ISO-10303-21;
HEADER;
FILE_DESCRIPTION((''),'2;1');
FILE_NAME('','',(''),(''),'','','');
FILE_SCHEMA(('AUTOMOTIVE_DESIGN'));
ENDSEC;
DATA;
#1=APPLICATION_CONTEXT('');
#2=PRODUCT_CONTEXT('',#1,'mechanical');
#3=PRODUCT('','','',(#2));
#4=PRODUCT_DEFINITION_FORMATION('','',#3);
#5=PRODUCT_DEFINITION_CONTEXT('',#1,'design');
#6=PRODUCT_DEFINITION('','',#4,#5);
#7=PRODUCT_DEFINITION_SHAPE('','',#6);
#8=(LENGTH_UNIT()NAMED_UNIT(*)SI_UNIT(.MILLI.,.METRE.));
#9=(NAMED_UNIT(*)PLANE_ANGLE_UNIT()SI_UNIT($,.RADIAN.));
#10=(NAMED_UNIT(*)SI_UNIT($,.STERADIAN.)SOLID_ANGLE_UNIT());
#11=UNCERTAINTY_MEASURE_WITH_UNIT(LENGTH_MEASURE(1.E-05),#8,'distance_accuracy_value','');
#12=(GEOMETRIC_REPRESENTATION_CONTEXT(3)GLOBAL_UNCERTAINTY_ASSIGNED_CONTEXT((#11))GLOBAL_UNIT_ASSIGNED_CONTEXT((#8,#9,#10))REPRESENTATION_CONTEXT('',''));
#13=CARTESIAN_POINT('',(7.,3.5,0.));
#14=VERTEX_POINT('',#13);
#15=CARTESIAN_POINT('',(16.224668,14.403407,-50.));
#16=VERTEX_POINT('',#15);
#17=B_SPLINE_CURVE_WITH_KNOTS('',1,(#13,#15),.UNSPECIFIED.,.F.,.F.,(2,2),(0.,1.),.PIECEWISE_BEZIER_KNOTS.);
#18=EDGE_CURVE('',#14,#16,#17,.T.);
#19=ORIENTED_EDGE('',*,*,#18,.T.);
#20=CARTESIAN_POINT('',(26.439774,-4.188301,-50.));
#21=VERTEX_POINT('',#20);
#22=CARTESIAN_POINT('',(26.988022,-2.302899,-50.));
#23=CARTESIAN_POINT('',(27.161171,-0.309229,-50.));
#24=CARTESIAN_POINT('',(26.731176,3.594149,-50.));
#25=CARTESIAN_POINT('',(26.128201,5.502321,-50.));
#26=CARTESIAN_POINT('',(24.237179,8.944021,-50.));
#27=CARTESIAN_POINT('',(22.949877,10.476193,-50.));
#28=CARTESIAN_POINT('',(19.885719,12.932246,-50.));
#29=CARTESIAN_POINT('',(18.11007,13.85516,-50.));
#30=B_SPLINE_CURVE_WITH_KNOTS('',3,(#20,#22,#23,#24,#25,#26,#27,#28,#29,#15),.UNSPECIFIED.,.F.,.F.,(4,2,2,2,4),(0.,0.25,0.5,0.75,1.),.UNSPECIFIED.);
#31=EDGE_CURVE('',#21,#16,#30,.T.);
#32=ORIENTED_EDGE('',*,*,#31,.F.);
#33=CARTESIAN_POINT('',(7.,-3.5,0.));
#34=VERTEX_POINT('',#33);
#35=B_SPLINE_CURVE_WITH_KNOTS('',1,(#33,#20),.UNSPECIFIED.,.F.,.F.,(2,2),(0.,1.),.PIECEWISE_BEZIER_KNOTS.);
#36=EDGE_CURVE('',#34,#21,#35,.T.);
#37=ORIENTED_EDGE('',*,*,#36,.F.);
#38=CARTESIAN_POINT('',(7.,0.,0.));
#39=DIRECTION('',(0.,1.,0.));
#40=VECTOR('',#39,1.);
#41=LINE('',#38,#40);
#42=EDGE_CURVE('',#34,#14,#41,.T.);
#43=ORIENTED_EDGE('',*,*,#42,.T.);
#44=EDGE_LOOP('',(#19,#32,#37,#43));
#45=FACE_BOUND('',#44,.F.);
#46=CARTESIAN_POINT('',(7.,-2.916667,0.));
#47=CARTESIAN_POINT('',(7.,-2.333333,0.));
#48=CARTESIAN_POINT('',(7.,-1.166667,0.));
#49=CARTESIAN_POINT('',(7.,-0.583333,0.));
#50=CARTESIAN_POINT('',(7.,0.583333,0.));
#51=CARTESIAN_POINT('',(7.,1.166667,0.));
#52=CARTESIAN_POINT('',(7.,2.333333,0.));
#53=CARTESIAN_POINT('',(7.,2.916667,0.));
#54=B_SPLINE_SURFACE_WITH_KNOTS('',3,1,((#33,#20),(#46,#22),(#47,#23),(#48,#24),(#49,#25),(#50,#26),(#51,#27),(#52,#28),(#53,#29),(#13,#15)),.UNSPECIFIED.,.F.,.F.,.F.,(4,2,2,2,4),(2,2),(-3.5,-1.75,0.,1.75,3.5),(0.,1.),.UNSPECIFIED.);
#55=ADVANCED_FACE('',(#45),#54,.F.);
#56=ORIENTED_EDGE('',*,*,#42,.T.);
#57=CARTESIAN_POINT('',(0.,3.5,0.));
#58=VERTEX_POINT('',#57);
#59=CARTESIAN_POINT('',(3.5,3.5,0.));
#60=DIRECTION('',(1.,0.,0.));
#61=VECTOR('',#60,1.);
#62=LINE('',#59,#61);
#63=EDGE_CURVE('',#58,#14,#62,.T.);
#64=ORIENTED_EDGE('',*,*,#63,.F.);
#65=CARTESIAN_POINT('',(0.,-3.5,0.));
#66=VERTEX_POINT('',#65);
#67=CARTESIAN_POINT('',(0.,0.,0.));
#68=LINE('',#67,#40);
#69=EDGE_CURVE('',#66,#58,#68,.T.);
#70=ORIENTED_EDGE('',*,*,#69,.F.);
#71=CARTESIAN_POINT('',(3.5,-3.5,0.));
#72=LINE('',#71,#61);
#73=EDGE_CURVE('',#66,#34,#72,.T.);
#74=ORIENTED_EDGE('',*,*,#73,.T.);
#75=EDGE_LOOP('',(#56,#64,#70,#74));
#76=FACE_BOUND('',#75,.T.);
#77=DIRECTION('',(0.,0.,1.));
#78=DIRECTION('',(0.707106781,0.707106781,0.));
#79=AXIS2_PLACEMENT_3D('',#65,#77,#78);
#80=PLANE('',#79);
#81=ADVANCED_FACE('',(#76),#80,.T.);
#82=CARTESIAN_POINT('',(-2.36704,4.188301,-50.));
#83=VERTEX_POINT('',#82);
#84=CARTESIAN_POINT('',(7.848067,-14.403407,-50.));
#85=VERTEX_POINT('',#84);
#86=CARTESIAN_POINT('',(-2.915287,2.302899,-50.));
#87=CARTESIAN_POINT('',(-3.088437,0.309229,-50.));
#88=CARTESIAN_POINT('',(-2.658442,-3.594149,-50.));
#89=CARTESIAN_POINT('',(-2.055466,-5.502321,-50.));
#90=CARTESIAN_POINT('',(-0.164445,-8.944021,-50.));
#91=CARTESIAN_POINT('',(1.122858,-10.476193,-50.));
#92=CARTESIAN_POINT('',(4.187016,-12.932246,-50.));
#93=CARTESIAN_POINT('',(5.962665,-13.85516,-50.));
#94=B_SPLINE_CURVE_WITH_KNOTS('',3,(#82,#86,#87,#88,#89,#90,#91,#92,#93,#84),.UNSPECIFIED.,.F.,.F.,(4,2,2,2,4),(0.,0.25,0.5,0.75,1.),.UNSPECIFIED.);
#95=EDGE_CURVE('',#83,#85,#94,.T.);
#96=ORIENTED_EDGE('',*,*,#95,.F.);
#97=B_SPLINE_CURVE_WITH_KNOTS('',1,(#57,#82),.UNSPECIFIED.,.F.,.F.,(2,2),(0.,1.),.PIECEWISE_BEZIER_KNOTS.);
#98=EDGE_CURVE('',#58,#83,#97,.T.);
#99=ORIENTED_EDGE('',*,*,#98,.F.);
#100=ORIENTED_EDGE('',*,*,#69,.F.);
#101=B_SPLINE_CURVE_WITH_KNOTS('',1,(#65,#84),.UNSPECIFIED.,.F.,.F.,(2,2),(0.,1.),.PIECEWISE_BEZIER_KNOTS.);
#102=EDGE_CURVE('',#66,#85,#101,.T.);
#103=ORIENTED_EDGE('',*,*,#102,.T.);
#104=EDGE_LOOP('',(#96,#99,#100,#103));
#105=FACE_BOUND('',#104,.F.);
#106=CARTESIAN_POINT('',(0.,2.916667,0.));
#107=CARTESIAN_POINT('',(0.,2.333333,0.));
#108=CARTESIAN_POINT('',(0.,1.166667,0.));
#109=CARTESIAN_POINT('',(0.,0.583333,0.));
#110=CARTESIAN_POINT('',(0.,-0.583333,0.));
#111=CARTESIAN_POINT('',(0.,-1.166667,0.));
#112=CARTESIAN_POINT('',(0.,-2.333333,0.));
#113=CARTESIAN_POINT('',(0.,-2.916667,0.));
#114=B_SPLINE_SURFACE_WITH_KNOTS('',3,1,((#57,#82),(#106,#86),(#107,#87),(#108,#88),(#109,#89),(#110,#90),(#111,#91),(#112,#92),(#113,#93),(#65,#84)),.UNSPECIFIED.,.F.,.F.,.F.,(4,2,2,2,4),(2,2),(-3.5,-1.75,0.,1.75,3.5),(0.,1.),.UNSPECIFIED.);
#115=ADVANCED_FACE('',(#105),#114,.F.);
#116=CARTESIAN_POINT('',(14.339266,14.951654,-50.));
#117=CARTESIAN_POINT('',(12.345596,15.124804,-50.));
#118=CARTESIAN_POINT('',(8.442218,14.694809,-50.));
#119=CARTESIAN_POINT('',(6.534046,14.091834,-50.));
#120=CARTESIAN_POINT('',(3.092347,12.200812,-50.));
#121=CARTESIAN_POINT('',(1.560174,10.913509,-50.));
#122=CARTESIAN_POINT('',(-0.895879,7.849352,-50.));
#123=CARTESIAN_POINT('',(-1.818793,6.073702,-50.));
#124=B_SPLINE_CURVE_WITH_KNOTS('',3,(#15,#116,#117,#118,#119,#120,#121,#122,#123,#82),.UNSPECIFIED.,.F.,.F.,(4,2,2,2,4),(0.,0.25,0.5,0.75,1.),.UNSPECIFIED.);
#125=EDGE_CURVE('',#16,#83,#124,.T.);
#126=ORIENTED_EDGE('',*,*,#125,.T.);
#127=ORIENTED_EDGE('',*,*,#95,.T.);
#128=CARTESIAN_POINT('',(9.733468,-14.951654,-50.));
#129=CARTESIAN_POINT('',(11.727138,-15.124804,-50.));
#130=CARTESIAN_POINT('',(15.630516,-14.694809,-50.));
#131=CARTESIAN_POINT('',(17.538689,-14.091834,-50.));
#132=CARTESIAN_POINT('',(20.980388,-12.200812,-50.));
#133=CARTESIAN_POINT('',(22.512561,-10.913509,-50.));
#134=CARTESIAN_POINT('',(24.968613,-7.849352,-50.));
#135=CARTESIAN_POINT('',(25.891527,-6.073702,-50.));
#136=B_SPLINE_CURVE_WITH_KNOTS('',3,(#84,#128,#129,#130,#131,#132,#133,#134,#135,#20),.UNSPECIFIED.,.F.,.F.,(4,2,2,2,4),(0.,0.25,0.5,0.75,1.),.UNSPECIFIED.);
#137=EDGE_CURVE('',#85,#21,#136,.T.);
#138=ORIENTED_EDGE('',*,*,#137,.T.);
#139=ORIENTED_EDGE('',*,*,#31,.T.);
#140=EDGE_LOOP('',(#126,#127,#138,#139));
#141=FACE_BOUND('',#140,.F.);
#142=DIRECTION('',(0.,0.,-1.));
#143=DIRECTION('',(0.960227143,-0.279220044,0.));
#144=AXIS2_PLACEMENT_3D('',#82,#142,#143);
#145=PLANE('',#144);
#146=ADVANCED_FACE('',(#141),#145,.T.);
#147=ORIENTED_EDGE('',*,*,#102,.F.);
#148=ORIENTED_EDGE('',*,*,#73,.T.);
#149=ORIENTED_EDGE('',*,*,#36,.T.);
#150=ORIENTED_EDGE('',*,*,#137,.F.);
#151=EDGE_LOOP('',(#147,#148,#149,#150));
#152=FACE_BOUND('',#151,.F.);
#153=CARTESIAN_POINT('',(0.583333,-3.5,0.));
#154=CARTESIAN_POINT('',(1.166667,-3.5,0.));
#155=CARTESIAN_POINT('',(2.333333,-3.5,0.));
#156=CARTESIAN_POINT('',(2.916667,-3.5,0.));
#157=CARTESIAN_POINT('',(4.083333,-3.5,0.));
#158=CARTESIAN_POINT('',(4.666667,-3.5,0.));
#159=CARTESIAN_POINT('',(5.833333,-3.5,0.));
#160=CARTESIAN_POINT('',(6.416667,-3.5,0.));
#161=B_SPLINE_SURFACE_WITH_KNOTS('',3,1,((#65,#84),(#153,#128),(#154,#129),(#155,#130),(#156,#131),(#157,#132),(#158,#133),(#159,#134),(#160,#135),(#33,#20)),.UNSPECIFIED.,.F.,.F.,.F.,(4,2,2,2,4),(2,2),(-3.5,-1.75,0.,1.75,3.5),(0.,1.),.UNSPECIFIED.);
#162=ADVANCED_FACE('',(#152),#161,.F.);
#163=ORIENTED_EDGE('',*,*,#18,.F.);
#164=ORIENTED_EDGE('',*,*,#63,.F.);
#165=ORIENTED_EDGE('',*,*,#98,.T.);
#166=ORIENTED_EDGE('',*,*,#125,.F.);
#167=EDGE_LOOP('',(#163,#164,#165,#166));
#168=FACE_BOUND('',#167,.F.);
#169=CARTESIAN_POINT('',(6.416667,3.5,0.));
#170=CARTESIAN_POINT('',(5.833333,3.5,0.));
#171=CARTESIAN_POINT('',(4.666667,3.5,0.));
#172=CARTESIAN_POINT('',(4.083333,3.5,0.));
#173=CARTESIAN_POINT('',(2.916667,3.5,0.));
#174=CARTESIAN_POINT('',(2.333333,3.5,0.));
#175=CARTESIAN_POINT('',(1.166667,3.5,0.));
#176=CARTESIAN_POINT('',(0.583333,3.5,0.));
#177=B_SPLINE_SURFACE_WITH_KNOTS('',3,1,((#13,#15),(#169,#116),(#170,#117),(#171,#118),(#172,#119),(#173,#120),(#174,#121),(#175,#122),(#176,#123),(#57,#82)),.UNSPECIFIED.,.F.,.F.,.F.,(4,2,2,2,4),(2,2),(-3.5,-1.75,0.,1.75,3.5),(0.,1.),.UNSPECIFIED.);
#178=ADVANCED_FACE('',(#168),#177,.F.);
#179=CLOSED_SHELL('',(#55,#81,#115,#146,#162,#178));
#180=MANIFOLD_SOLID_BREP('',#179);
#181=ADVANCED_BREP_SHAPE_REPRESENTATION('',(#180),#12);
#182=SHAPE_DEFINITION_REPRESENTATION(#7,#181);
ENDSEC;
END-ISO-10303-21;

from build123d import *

# Parameters (mm, degrees)
F0_W = 7
F0_H = 7


# Not quite as in the source:
# - the arcs of a loft's sections are written as splines that run evenly, so that the points pair up as in the source's solid


with BuildPart() as f3:
    # F0 (on Top) → F3 section 0
    with BuildSketch(Plane.XY):
        with Locations((3.5, 0)):
            Rectangle(F0_W, F0_H)
    # F2 (on offset) → F3 section 1
    with BuildSketch(Plane.XY.offset(-50)):
        with BuildLine():
            add(Edge.make_bspline(
                [(-2.3670398878, 4.1883006664), (-2.915287163, 2.3028990793), (-3.0884365913, 0.3092290616), (-2.6584415625, -3.5941491101), (-2.05546629, -5.5023214516), (-0.1644445272, -8.9440206786), (1.1228579268, -10.4761934025), (4.1870155024, -12.9322461765), (5.9626650088, -13.8551598748), (7.8480665958, -14.40340715)],
                knots=[0, 0, 0, 0, 0.25, 0.25, 0.5, 0.5, 0.75, 0.75, 1, 1, 1, 1], degree=3))
            add(Edge.make_bspline(
                [(7.8480665958, -14.40340715), (9.7334681829, -14.9516544252), (11.7271382006, -15.1248038535), (15.6305163723, -14.6948088247), (17.5386887138, -14.0918335522), (20.9803879408, -12.2008117894), (22.5125606647, -10.9135093353), (24.9686134387, -7.8493517598), (25.891527137, -6.0737022534), (26.4397744122, -4.1883006664)],
                knots=[0, 0, 0, 0, 0.25, 0.25, 0.5, 0.5, 0.75, 0.75, 1, 1, 1, 1], degree=3))
            add(Edge.make_bspline(
                [(26.4397744122, -4.1883006664), (26.9880216874, -2.3028990793), (27.1611711157, -0.3092290616), (26.7311760869, 3.5941491101), (26.1282008144, 5.5023214516), (24.2371790516, 8.9440206786), (22.9498765975, 10.4761934025), (19.885719022, 12.9322461765), (18.1100695156, 13.8551598748), (16.2246679286, 14.40340715)],
                knots=[0, 0, 0, 0, 0.25, 0.25, 0.5, 0.5, 0.75, 0.75, 1, 1, 1, 1], degree=3))
            add(Edge.make_bspline(
                [(16.2246679286, 14.40340715), (14.3392663415, 14.9516544252), (12.3455963238, 15.1248038535), (8.4422181521, 14.6948088247), (6.5340458106, 14.0918335522), (3.0923465836, 12.2008117894), (1.5601738597, 10.9135093353), (-0.8958789143, 7.8493517598), (-1.8187926126, 6.0737022534), (-2.3670398878, 4.1883006664)],
                knots=[0, 0, 0, 0, 0.25, 0.25, 0.5, 0.5, 0.75, 0.75, 1, 1, 1, 1], degree=3))
        make_face()
    loft(ruled=True)


solid = f3.part
